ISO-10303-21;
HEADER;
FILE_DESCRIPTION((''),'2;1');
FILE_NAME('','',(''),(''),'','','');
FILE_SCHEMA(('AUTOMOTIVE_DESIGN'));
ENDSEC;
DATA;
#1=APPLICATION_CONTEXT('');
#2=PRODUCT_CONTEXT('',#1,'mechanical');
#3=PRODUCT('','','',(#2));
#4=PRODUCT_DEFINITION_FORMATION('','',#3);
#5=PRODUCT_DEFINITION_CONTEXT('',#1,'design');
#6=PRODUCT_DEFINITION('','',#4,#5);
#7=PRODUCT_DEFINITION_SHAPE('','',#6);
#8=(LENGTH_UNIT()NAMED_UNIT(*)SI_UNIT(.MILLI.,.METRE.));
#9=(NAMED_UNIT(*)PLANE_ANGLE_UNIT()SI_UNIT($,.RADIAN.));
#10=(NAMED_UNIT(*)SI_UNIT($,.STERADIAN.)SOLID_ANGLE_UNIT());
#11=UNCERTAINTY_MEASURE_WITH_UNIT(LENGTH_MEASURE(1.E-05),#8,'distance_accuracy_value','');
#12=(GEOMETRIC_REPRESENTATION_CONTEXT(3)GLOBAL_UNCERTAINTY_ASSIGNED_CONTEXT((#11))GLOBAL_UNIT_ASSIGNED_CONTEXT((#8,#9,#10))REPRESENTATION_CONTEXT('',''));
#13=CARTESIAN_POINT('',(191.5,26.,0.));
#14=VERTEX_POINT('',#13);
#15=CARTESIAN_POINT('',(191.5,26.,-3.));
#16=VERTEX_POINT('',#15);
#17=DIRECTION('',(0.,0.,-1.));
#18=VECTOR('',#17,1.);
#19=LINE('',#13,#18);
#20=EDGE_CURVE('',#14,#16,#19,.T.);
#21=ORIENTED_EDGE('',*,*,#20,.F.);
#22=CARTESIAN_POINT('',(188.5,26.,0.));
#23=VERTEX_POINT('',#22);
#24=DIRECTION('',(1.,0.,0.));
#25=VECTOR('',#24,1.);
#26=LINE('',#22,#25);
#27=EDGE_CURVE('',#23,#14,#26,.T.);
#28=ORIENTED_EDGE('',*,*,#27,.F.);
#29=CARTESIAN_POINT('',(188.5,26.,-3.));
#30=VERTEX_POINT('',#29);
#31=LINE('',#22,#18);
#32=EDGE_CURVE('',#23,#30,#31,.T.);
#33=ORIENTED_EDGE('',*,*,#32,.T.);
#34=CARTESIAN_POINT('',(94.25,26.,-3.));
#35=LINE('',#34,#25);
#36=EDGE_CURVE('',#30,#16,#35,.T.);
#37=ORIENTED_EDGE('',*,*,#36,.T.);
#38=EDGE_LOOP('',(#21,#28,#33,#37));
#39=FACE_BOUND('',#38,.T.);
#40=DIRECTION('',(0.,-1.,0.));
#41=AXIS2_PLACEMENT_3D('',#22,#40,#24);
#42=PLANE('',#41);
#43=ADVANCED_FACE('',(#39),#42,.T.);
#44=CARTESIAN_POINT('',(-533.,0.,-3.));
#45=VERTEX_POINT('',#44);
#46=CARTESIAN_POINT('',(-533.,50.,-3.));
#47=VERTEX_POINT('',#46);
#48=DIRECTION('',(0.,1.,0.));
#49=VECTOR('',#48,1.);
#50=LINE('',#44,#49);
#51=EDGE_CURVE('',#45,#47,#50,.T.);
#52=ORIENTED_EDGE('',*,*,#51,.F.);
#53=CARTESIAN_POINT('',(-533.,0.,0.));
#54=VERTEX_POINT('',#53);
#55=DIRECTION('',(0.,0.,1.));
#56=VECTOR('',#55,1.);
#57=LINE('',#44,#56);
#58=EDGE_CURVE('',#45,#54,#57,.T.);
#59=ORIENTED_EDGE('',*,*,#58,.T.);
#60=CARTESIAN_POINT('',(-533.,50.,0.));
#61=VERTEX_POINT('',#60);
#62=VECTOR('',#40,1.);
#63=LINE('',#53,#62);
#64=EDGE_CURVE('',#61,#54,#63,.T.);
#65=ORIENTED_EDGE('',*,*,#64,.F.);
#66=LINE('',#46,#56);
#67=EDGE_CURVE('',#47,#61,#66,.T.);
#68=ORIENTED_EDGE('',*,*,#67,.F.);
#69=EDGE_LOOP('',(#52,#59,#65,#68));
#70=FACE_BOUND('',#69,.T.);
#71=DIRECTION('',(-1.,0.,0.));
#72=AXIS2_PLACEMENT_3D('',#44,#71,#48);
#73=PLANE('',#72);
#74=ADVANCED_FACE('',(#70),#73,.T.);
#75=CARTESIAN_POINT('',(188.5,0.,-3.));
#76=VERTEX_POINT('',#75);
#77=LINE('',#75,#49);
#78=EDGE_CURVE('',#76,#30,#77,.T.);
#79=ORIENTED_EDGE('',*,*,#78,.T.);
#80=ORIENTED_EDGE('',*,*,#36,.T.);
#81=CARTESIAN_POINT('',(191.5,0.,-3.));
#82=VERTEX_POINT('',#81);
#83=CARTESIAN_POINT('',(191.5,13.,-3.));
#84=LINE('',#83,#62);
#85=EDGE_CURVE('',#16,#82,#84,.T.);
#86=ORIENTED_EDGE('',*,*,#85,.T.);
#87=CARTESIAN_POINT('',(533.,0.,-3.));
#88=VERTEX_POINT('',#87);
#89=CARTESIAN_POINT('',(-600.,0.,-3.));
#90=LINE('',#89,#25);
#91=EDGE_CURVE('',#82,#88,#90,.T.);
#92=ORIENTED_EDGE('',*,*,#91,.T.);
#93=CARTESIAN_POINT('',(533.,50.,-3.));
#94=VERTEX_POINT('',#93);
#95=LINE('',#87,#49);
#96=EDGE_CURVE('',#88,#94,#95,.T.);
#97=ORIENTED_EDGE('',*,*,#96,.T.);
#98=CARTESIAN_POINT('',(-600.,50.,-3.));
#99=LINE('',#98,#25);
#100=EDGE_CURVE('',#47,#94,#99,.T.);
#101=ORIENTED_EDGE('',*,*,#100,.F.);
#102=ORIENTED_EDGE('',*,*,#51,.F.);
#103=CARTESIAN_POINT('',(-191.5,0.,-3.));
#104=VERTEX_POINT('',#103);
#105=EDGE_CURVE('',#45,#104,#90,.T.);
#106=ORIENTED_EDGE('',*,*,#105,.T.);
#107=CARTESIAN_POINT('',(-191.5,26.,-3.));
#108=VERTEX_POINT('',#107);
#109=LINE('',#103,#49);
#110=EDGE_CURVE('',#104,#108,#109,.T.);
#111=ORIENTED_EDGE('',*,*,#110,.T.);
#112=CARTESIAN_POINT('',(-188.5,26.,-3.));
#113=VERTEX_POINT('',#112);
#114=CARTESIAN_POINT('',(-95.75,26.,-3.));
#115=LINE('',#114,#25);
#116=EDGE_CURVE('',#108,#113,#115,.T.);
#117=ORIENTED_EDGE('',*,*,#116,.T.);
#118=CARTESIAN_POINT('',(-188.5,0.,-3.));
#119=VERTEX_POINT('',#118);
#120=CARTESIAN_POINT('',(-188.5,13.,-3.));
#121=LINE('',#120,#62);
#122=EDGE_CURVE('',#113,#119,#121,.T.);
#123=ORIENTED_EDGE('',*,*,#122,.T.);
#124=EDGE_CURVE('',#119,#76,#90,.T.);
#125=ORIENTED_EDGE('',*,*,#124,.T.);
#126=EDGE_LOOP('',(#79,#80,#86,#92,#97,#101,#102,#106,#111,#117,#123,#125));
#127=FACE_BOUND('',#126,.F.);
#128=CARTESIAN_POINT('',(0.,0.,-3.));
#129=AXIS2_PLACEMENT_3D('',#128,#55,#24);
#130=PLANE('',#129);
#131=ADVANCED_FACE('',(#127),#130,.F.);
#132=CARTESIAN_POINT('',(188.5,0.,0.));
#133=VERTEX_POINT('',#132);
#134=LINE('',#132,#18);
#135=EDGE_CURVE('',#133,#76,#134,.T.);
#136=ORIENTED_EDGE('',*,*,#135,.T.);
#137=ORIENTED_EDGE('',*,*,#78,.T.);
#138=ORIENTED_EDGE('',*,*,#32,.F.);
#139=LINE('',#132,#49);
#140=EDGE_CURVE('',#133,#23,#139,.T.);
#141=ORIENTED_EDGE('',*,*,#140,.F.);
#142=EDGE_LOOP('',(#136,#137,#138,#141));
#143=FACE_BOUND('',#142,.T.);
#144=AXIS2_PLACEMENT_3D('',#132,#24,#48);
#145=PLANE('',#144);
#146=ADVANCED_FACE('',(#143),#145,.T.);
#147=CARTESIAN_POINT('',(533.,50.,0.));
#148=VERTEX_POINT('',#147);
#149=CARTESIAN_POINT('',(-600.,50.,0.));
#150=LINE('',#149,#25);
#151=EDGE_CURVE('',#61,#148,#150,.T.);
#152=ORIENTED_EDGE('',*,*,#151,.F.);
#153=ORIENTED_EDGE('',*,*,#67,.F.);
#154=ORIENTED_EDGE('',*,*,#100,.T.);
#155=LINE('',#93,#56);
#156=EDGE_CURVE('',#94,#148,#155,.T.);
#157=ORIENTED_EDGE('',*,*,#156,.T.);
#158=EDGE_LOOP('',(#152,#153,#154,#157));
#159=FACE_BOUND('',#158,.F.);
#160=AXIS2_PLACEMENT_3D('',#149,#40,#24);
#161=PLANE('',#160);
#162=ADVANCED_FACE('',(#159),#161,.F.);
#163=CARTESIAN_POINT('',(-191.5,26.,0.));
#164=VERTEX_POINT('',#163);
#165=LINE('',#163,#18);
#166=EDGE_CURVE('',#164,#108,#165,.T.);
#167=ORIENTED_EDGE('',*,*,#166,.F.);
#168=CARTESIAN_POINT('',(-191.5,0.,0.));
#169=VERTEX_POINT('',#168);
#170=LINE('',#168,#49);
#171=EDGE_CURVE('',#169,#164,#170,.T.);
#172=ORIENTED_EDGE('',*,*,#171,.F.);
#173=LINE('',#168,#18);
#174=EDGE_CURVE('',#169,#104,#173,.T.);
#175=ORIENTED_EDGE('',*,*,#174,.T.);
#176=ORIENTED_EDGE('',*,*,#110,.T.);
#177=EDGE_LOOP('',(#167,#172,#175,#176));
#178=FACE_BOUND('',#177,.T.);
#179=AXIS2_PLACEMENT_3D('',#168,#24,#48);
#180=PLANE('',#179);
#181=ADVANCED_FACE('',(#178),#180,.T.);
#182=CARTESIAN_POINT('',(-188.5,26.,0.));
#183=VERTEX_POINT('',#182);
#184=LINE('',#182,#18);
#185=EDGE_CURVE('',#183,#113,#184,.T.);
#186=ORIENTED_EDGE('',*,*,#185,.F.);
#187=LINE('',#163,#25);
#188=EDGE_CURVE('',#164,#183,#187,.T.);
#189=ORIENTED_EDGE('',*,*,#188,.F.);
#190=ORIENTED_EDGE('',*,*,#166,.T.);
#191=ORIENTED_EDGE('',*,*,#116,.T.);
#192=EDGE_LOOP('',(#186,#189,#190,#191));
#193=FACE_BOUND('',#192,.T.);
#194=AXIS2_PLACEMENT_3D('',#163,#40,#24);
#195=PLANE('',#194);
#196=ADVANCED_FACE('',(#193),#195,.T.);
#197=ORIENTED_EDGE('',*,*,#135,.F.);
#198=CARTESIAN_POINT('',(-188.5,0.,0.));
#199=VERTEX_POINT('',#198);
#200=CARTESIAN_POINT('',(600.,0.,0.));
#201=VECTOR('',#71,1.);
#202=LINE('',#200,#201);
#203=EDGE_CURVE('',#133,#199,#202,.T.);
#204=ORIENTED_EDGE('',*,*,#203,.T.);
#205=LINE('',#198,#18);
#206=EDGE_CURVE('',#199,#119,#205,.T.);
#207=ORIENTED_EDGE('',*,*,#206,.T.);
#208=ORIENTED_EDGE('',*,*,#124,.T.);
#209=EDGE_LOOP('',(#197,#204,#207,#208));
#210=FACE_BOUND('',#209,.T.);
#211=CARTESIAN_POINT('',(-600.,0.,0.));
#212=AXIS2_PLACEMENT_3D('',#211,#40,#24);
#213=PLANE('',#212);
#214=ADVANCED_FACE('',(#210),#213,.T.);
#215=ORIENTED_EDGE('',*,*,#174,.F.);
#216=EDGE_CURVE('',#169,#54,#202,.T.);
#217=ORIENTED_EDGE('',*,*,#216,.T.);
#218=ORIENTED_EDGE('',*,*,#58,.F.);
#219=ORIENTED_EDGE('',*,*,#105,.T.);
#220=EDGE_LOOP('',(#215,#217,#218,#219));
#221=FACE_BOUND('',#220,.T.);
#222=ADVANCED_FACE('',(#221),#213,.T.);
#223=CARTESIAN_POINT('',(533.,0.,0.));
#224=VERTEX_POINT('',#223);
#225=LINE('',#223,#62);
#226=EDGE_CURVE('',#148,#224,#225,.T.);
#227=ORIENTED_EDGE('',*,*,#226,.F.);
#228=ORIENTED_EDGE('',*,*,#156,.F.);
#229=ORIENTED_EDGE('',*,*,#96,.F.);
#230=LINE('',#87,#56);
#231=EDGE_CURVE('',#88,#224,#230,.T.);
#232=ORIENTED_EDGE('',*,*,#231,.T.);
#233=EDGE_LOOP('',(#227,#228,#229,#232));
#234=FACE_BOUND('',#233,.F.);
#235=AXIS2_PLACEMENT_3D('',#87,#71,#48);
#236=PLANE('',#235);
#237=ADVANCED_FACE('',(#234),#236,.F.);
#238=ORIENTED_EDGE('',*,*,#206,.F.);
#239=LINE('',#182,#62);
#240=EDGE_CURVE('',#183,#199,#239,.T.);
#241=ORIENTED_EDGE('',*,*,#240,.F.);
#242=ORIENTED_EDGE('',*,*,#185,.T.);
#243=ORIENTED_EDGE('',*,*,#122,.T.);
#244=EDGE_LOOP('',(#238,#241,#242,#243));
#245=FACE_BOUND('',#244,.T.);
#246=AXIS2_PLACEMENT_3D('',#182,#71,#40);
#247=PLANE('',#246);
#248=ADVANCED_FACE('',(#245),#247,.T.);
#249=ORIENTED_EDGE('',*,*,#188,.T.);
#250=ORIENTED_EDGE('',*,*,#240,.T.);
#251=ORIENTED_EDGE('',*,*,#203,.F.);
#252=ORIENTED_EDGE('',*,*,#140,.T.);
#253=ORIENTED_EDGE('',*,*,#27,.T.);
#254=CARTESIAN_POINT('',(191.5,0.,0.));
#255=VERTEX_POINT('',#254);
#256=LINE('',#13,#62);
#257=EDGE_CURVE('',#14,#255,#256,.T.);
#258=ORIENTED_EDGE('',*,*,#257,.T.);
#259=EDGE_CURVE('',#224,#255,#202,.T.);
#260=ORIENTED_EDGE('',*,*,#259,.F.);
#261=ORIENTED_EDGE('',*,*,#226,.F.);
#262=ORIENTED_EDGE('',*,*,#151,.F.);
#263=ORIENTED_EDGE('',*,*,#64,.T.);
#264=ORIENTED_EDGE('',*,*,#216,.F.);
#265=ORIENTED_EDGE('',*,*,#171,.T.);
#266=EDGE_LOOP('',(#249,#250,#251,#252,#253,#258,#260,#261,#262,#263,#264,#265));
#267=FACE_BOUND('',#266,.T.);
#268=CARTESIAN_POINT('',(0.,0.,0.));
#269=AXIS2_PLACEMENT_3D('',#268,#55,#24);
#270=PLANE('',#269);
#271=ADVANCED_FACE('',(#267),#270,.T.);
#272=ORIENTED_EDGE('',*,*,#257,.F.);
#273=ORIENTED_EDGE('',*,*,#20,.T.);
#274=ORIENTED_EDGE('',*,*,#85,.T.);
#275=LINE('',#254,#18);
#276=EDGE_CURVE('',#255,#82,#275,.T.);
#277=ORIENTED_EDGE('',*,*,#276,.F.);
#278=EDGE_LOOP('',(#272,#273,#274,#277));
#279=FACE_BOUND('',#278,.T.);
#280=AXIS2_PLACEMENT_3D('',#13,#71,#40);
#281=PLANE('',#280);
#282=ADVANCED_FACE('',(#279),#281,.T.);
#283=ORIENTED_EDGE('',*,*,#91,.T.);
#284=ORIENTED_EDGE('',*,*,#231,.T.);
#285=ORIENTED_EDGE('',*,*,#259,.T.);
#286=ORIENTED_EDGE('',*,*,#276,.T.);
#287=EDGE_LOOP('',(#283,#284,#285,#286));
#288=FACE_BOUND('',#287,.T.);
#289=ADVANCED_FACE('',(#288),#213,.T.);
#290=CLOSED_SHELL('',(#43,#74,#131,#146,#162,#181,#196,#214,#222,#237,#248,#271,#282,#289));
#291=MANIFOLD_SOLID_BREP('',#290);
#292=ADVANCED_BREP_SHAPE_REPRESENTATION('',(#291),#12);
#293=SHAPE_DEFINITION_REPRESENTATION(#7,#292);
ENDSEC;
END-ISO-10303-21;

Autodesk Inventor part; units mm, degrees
ref_plane "YZ Plane" through (0, 0, 0) normal (1, 0, 0) x (0, 1, 0)
ref_plane "XZ Plane" through (0, 0, 0) normal (0, 1, 0) x (-1, 0, 0)
ref_plane "XY Plane" through (0, 0, 0) normal (0, 0, 1) x (1, 0, 0)
sketch "Sketch1" plane through (0, 0, 0) normal (0, 0, 1) x (1, 0, 0)
  line L0 (-600, 0) -> (600, 0)
  line L1 (-600, 0) -> (-600, 50)
  line L2 (-600, 50) -> (600, 50)
  line L3 (600, 50) -> (600, 0)
  circle A0 centre (-600, 0) radius 25
  circle A1 centre (600, 0) radius 25
  line L4 (600, 0) -> (644.2345, 16.1001)
  line L5 (644.2345, 16.1001) -> (635, 50)
  line L6 (635, 50) -> (600, 50)
  point P0 (0, 0)
  point P1 (0, 0)
  point P2 (-600, 25)
  point P3 (-575, 0)
  point P4 (575, 0)
  point P5 (600, 25)
  point P6 (623.4923, 8.5505)
  dimension "d18" = 50
  dimension "d19" = 1200
  dimension "d25" = 50
  dimension "d26" = 50
  dimension "d39" = 70
  dimension "d40" = 35
extrude "Plate2" add sketch "Sketch1" against normal blind 3 contours L1 A0 L0 | A0 L1 L2 L3 A1 L0 | A1 L3 L0 picked at (-598.1457, 16.4577)
sketch "Sketch3" plane through (0, 0, 0) normal (0, 0, 1) x (1, 0, 0)
  line L0 (-190, 0) -> (-190, 50) construction
  line L1 (600, 50) -> (-600, 50) projected
  line L2 (-600, 50) -> (-600, 0) projected
  line L3 (-191.5, 26) -> (-188.5, 26)
  line L4 (-188.5, 26) -> (-188.5, 0)
  line L5 (-188.5, 0) -> (-191.5, 0)
  line L6 (-191.5, 0) -> (-191.5, 26)
  line L7 (-600, 0) -> (600, 0) projected
  line L8 (190, 50) -> (190, 0) construction
  line L9 (188.5, 26) -> (191.5, 26)
  line L10 (191.5, 26) -> (191.5, 0)
  line L11 (191.5, 0) -> (188.5, 0)
  line L12 (188.5, 0) -> (188.5, 26)
  point P0 (0, 0)
  point P1 (0, 0)
  point P2 (0, 0)
  point P3 (191.5, 0)
  dimension "d28" = 3
  dimension "d29" = 26
  dimension "d35" = 190
  dimension "d36" = 190
  dimension "d37" = 3
  dimension "d38" = 26
extrude "Extrusion2" cut sketch "Sketch3" against normal through all
sketch "Sketch4" plane through (0, 0, -3) normal (0, 0, -1) x (-1, 0, 0)
  line L0 (188.5, 0) -> (188.5, 26) projected
  line L1 (188.5, 26) -> (191.5, 26) projected
  line L2 (191.5, 26) -> (191.5, 0) projected
  line L3 (600, 0) -> (191.5, 0) projected
  line L4 (600, 50) -> (600, 0) projected
  line L5 (-600, 50) -> (600, 50) projected
  line L6 (-600, 0) -> (-600, 50) projected
  line L7 (-191.5, 0) -> (-600, 0) projected
  line L8 (-191.5, 0) -> (-191.5, 26) projected
  line L9 (-191.5, 26) -> (-188.5, 26) projected
  line L10 (-188.5, 26) -> (-188.5, 0) projected
  line L11 (188.5, 0) -> (-188.5, 0) projected
  line L12 (-533, 0) -> (-533, 50)
  line L13 (-600, 50) -> (600, 50) projected
  line L14 (600, 0) -> (191.5, 0) projected
  line L15 (533, 0) -> (533, 50)
  point P0 (0, 0)
  point P1 (533, 0)
  dimension "d45" = 67
  dimension "d46" = 67
extrude "Extrusion3" cut sketch "Sketch4" against normal through all contours L15 L5 L4 L3 | L7 L6 L5 L12
sketch "Sketch5" plane through (0, 0, 0) normal (0, 0, 1) x (1, 0, 0)
  line L0 (-55.7541, 0.5014) -> (-55.7541, 31.0924) construction
  line L1 (-55.7541, 31.0924) -> (66.2742, 31.0924) construction
  line L2 (66.2742, 31.0924) -> (66.2742, 0.5014) construction
  line L3 (66.2742, 0.5014) -> (-55.7541, 0.5014) construction
  line L4 (533, 50) -> (-533, 50) projected
  line L5 (-533, 50) -> (-533, 0) projected
  point P0 (0, 0)
mark "Mark1"
equation "\"d28\" = Thickness"
equation "\"d36\" = d35"
equation "\"d37\" = Thickness"
equation "\"d38\" = d29"
equation "\"d46\" = d45"
equation "\"d20\" = Thickness"
equation "\"BendReliefWidth\" = Thickness"
equation "\"BendReliefDepth\" = 0.5 * Thickness"
equation "\"CornerReliefSize\" = 4 * Thickness"
equation "\"MinimumRemnant\" = 2 * Thickness"
equation "\"TransitionRadius\" = BendRadius"
equation "\"JacobiRadiusSize\" = BendRadius"
equation "\"GapSize\" = Thickness"
equation "\"Thickness\" = 3"
equation "\"BendRadius\" = 5"
properties part number "MSC 106 rib cone" material "Stainless Steel"
